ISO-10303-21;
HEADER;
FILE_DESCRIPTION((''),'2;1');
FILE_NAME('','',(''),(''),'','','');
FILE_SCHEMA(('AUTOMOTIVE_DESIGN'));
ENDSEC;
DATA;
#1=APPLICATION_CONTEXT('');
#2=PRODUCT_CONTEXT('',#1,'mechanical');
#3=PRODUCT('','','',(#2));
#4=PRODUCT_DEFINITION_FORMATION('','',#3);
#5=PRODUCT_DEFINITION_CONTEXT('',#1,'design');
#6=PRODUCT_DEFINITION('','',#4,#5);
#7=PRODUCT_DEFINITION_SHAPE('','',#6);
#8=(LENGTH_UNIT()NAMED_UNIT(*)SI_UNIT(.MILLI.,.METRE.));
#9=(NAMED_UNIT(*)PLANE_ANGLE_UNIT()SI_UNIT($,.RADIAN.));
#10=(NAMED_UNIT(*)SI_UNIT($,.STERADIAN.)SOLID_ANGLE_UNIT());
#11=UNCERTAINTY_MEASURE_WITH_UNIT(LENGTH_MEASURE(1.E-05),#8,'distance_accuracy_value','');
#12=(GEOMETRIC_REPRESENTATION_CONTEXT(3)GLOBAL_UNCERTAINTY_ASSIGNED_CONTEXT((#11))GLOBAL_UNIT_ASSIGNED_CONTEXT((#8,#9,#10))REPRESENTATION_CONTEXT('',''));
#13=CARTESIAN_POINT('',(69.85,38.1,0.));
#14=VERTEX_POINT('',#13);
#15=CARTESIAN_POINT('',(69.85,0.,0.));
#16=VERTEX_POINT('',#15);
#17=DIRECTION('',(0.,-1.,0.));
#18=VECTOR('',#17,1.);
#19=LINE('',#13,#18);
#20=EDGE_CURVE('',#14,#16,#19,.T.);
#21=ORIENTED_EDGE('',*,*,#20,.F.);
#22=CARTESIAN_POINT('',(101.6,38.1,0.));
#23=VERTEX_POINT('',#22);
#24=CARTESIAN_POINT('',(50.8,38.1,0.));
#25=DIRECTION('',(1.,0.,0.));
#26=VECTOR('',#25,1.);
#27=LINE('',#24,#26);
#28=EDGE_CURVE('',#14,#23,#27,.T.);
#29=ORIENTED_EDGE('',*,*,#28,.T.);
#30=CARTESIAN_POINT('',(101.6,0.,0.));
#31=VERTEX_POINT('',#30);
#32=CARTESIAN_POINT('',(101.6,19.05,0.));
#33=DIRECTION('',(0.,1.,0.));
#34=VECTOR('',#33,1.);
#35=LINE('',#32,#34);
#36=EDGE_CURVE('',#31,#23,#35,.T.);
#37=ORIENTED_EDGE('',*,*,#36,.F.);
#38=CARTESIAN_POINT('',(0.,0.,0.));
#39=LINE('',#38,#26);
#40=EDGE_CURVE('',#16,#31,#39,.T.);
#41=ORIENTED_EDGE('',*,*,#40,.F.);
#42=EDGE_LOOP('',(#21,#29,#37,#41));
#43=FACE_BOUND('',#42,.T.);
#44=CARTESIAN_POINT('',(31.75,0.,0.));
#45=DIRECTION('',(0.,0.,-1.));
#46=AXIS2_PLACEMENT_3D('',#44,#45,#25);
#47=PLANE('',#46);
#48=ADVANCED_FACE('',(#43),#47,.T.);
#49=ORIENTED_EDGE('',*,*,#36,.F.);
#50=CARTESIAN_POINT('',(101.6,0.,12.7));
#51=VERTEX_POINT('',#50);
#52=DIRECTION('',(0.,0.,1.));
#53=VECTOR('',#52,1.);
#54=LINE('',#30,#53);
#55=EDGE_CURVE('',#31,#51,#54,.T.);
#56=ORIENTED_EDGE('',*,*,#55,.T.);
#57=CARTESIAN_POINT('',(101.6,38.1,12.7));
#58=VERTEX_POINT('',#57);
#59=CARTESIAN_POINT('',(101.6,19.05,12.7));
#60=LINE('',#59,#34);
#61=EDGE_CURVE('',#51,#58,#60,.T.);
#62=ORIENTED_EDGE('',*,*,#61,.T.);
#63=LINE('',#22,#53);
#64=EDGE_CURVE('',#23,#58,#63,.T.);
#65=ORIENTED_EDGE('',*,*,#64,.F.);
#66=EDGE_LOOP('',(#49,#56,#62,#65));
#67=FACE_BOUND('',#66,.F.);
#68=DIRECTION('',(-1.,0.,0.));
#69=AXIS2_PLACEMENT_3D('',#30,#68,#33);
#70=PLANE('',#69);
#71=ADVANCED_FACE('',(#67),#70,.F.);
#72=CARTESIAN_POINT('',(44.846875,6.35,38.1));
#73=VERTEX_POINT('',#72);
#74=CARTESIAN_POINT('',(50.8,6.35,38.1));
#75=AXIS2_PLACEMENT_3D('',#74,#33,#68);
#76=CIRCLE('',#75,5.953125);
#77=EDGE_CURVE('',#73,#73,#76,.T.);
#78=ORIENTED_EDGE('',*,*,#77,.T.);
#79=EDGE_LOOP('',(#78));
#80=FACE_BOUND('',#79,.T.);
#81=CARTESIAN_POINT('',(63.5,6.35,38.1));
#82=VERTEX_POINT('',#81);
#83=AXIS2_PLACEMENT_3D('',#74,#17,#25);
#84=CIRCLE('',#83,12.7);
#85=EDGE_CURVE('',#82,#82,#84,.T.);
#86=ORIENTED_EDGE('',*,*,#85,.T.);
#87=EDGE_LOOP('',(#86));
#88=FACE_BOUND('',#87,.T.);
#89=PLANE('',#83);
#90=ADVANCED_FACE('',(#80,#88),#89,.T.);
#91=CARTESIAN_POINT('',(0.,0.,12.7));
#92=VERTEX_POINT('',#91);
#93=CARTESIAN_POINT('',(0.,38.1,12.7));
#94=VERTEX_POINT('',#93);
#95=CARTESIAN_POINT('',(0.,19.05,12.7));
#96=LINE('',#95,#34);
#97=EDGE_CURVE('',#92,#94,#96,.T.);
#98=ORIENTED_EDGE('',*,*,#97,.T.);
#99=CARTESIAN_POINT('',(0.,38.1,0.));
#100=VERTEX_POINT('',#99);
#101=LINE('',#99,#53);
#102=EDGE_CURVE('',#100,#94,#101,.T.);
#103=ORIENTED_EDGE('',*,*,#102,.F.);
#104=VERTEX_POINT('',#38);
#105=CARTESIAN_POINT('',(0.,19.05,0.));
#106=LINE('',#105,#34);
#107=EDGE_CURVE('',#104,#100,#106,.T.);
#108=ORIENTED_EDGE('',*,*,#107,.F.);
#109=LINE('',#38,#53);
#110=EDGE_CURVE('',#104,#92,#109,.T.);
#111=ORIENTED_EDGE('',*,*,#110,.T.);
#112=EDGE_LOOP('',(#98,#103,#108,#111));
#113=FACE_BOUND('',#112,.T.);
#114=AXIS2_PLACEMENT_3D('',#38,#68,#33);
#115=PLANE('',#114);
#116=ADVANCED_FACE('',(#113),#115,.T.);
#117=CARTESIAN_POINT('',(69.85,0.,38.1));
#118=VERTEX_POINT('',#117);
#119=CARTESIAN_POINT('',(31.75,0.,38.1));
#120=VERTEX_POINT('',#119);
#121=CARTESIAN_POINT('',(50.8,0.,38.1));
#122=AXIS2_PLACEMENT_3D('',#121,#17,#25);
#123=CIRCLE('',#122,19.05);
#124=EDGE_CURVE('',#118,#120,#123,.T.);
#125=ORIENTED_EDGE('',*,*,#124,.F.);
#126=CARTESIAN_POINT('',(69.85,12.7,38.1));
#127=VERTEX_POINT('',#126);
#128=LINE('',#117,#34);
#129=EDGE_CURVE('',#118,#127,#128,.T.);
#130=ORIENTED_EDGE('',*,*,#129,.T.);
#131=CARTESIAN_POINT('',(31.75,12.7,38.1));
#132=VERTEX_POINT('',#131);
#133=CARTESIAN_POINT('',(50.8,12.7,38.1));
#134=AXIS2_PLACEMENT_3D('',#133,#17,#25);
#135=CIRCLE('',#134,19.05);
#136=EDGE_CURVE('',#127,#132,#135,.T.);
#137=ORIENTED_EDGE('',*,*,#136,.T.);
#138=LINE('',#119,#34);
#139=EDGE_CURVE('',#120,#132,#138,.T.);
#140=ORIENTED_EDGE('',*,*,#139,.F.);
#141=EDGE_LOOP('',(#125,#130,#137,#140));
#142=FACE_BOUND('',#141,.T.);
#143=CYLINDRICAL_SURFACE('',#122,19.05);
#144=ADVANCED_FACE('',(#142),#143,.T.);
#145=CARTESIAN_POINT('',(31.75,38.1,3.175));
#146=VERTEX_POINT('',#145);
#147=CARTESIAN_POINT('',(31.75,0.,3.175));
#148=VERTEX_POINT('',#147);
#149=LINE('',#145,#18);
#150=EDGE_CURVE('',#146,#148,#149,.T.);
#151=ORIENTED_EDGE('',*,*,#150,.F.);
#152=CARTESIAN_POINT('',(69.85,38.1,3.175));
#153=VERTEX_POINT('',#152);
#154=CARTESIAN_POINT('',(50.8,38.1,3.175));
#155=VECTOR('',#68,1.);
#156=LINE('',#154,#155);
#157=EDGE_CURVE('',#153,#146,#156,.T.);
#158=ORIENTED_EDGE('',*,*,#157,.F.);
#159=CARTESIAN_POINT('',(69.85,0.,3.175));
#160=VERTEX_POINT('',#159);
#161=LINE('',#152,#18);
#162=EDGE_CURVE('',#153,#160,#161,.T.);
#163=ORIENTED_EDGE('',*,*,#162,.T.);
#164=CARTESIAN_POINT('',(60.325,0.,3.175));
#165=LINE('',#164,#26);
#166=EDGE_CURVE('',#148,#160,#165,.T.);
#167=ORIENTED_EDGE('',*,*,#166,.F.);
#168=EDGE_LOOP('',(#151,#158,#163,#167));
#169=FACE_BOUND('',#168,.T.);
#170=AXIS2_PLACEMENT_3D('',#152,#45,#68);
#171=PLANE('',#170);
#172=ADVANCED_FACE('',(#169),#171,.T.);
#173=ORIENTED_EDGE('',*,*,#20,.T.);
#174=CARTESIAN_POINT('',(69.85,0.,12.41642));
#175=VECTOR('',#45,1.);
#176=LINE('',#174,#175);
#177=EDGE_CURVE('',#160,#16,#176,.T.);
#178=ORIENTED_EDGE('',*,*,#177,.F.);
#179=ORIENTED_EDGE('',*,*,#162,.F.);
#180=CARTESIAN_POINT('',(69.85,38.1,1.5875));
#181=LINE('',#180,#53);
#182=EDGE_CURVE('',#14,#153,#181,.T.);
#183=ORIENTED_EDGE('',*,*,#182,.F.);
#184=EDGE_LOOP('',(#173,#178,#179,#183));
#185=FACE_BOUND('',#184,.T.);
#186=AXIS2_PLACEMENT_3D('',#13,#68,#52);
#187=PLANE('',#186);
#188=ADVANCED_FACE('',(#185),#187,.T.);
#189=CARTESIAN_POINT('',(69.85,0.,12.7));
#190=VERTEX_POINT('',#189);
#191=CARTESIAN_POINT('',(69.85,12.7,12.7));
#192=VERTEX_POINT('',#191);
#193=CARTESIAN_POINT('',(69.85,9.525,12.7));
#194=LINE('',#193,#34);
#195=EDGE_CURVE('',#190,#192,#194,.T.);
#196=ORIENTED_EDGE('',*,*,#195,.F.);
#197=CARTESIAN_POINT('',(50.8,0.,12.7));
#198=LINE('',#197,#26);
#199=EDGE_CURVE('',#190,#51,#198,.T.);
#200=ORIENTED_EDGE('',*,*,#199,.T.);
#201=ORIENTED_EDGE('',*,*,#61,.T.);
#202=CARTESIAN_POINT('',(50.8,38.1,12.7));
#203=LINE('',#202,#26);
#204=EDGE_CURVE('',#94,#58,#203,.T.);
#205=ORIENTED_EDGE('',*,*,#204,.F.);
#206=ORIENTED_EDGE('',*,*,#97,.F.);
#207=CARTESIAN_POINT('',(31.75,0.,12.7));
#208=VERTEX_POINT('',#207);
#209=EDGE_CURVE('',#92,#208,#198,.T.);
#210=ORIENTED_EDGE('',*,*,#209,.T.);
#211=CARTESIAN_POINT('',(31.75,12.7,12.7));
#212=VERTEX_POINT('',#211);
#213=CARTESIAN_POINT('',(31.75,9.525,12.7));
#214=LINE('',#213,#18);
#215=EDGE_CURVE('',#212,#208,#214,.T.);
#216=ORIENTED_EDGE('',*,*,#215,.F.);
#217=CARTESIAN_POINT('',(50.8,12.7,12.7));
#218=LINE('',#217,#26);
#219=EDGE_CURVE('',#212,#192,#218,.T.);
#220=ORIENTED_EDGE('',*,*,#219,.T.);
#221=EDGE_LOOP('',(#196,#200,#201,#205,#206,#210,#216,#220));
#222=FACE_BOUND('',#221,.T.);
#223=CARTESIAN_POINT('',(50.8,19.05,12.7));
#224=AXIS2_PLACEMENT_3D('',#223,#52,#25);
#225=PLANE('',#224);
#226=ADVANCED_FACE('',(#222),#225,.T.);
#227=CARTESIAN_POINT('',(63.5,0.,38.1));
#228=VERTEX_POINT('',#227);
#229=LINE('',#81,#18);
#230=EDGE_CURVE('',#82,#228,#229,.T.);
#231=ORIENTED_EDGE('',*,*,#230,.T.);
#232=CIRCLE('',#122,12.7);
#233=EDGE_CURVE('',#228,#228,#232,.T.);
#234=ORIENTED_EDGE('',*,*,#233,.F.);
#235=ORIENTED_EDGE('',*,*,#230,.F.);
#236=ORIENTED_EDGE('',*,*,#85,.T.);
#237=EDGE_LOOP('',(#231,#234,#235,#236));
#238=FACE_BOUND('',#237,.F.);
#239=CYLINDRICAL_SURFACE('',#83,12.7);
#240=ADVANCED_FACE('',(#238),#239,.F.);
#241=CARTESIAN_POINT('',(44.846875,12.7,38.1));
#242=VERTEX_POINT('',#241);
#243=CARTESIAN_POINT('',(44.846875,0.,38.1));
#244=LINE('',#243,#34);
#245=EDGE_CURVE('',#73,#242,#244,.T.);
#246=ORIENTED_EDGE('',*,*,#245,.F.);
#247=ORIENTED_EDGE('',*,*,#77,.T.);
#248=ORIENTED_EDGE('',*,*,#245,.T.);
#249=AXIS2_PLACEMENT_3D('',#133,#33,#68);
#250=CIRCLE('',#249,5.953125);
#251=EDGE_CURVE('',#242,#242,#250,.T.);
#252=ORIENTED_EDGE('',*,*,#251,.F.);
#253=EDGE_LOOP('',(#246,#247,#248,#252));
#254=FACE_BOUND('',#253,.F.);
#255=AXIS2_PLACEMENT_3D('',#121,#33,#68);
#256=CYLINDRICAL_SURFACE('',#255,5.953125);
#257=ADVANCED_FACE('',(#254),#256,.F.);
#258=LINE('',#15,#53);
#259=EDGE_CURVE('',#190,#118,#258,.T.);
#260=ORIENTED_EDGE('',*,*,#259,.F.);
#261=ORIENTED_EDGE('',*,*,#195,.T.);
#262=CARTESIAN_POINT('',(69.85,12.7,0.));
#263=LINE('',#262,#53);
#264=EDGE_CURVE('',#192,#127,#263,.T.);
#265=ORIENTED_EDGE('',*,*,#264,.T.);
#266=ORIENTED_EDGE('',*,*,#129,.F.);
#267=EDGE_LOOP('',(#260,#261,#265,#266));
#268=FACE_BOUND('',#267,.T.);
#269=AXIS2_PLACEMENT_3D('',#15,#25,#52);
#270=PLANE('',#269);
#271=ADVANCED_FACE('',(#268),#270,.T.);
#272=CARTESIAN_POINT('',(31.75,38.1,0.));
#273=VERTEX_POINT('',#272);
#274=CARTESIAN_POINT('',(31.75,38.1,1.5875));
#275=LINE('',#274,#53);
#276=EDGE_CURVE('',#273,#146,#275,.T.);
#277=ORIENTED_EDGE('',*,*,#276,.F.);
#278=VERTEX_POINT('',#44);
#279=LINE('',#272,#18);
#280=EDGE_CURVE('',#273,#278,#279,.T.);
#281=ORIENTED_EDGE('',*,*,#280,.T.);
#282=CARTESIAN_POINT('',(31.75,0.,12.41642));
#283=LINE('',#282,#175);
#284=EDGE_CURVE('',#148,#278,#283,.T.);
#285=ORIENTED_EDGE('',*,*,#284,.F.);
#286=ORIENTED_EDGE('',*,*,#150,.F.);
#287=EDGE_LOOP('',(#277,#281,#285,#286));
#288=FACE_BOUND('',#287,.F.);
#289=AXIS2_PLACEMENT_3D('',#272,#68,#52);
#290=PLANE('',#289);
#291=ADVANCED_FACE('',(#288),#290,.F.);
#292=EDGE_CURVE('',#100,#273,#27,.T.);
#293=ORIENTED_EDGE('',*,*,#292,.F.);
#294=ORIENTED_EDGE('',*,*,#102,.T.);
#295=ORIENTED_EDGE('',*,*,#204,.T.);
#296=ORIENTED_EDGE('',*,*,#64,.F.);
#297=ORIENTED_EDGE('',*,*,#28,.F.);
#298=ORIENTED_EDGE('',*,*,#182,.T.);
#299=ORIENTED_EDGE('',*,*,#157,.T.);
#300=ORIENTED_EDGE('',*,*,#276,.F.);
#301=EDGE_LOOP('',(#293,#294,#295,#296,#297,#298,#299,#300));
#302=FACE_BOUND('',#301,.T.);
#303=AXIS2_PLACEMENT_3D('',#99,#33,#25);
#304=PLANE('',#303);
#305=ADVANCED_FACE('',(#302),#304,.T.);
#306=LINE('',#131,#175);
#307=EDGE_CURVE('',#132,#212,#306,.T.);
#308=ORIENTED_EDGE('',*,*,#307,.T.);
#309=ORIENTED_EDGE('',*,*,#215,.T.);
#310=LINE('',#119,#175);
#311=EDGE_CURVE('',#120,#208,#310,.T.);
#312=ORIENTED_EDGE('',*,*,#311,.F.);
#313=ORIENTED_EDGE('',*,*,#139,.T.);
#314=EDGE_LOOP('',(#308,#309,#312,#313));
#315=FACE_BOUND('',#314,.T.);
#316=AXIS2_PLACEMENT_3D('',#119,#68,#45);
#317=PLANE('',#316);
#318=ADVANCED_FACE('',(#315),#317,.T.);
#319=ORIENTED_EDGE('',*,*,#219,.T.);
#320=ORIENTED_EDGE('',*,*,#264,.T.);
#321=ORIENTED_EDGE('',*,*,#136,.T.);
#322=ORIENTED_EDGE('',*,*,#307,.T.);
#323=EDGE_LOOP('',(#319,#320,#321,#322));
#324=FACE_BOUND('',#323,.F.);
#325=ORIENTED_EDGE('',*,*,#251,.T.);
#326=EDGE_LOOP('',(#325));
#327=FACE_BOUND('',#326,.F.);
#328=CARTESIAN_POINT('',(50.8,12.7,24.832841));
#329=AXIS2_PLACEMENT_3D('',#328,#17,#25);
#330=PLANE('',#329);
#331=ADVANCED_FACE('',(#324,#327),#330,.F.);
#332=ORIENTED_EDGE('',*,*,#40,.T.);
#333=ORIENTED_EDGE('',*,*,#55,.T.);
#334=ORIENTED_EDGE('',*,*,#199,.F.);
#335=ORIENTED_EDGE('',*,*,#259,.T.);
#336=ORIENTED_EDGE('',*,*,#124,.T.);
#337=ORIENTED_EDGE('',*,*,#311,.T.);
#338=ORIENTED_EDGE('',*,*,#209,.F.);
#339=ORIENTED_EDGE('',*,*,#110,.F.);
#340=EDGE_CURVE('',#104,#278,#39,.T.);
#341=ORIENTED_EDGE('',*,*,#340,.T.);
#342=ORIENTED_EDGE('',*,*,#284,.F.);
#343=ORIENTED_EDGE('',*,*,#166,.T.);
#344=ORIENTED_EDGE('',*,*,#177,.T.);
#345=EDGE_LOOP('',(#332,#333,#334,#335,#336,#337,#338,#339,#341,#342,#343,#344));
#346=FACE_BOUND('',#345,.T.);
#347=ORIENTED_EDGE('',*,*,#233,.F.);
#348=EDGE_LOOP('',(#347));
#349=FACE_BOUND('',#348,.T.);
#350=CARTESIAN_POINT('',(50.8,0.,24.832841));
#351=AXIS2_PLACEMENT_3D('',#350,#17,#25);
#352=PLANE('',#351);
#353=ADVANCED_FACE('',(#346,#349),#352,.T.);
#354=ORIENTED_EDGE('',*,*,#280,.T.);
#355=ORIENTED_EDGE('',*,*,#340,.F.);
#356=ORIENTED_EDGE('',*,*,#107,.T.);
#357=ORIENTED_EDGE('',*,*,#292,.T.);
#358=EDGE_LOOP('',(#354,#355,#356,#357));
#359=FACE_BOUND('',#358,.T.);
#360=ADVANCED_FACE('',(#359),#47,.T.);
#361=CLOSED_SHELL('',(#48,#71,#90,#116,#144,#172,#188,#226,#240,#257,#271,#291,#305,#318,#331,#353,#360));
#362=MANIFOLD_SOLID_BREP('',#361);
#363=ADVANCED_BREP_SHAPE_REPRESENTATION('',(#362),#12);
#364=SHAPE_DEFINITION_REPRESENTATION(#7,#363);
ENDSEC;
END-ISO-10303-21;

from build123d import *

# Parameters (mm, degrees)
F0_W           = 101.6
F0_H           = 38.1
F1_DEPTH       = 12.7
F3_DEPTH       = 12.7
F4_D           = 11.90625
F4_CBORE_D     = 25.4
F4_CBORE_DEPTH = 6.35
F5_W           = 38.1
F5_H           = 3.175
F6_DEPTH       = 38.101


# Not quite as in the source:
# - a length typed as a fraction of an inch, garbled in the dataset ("3 / 203.2 mm" for 3/8 in), is restored


with BuildPart() as f1:
    # F0 (on Top) → F1 (new body)
    with BuildSketch(Plane.XY):
        with Locations((50.8, 19.05)):
            Rectangle(F0_W, F0_H)
    extrude(amount=F1_DEPTH)

    # F2 (on face) → F3 (join)
    with BuildSketch(Plane.XZ):
        with BuildLine():
            Line((31.75, 38.1), (31.75, 0))
            Line((31.75, 0), (69.85, 0))
            Line((69.85, 0), (69.85, 38.1))
            ThreePointArc((69.85, 38.1), (50.8, 57.15), (31.75, 38.1))
        make_face()
    extrude(amount=-F3_DEPTH)

    # F4 (through all)
    with Locations(Plane.XZ):
        with Locations((50.8, 38.1)):
            CounterBoreHole(F4_D / 2, F4_CBORE_D / 2, F4_CBORE_DEPTH)

    # F5 (on face) → F6 (cut, through all)
    with BuildSketch(Plane(origin=(0, 38.1, 0), x_dir=(-1, 0, 0), z_dir=(0, 1, 0))):
        with Locations((-50.8, 1.5875)):
            Rectangle(F5_W, F5_H)
    extrude(amount=-F6_DEPTH, mode=Mode.SUBTRACT)


solid = f1.part
